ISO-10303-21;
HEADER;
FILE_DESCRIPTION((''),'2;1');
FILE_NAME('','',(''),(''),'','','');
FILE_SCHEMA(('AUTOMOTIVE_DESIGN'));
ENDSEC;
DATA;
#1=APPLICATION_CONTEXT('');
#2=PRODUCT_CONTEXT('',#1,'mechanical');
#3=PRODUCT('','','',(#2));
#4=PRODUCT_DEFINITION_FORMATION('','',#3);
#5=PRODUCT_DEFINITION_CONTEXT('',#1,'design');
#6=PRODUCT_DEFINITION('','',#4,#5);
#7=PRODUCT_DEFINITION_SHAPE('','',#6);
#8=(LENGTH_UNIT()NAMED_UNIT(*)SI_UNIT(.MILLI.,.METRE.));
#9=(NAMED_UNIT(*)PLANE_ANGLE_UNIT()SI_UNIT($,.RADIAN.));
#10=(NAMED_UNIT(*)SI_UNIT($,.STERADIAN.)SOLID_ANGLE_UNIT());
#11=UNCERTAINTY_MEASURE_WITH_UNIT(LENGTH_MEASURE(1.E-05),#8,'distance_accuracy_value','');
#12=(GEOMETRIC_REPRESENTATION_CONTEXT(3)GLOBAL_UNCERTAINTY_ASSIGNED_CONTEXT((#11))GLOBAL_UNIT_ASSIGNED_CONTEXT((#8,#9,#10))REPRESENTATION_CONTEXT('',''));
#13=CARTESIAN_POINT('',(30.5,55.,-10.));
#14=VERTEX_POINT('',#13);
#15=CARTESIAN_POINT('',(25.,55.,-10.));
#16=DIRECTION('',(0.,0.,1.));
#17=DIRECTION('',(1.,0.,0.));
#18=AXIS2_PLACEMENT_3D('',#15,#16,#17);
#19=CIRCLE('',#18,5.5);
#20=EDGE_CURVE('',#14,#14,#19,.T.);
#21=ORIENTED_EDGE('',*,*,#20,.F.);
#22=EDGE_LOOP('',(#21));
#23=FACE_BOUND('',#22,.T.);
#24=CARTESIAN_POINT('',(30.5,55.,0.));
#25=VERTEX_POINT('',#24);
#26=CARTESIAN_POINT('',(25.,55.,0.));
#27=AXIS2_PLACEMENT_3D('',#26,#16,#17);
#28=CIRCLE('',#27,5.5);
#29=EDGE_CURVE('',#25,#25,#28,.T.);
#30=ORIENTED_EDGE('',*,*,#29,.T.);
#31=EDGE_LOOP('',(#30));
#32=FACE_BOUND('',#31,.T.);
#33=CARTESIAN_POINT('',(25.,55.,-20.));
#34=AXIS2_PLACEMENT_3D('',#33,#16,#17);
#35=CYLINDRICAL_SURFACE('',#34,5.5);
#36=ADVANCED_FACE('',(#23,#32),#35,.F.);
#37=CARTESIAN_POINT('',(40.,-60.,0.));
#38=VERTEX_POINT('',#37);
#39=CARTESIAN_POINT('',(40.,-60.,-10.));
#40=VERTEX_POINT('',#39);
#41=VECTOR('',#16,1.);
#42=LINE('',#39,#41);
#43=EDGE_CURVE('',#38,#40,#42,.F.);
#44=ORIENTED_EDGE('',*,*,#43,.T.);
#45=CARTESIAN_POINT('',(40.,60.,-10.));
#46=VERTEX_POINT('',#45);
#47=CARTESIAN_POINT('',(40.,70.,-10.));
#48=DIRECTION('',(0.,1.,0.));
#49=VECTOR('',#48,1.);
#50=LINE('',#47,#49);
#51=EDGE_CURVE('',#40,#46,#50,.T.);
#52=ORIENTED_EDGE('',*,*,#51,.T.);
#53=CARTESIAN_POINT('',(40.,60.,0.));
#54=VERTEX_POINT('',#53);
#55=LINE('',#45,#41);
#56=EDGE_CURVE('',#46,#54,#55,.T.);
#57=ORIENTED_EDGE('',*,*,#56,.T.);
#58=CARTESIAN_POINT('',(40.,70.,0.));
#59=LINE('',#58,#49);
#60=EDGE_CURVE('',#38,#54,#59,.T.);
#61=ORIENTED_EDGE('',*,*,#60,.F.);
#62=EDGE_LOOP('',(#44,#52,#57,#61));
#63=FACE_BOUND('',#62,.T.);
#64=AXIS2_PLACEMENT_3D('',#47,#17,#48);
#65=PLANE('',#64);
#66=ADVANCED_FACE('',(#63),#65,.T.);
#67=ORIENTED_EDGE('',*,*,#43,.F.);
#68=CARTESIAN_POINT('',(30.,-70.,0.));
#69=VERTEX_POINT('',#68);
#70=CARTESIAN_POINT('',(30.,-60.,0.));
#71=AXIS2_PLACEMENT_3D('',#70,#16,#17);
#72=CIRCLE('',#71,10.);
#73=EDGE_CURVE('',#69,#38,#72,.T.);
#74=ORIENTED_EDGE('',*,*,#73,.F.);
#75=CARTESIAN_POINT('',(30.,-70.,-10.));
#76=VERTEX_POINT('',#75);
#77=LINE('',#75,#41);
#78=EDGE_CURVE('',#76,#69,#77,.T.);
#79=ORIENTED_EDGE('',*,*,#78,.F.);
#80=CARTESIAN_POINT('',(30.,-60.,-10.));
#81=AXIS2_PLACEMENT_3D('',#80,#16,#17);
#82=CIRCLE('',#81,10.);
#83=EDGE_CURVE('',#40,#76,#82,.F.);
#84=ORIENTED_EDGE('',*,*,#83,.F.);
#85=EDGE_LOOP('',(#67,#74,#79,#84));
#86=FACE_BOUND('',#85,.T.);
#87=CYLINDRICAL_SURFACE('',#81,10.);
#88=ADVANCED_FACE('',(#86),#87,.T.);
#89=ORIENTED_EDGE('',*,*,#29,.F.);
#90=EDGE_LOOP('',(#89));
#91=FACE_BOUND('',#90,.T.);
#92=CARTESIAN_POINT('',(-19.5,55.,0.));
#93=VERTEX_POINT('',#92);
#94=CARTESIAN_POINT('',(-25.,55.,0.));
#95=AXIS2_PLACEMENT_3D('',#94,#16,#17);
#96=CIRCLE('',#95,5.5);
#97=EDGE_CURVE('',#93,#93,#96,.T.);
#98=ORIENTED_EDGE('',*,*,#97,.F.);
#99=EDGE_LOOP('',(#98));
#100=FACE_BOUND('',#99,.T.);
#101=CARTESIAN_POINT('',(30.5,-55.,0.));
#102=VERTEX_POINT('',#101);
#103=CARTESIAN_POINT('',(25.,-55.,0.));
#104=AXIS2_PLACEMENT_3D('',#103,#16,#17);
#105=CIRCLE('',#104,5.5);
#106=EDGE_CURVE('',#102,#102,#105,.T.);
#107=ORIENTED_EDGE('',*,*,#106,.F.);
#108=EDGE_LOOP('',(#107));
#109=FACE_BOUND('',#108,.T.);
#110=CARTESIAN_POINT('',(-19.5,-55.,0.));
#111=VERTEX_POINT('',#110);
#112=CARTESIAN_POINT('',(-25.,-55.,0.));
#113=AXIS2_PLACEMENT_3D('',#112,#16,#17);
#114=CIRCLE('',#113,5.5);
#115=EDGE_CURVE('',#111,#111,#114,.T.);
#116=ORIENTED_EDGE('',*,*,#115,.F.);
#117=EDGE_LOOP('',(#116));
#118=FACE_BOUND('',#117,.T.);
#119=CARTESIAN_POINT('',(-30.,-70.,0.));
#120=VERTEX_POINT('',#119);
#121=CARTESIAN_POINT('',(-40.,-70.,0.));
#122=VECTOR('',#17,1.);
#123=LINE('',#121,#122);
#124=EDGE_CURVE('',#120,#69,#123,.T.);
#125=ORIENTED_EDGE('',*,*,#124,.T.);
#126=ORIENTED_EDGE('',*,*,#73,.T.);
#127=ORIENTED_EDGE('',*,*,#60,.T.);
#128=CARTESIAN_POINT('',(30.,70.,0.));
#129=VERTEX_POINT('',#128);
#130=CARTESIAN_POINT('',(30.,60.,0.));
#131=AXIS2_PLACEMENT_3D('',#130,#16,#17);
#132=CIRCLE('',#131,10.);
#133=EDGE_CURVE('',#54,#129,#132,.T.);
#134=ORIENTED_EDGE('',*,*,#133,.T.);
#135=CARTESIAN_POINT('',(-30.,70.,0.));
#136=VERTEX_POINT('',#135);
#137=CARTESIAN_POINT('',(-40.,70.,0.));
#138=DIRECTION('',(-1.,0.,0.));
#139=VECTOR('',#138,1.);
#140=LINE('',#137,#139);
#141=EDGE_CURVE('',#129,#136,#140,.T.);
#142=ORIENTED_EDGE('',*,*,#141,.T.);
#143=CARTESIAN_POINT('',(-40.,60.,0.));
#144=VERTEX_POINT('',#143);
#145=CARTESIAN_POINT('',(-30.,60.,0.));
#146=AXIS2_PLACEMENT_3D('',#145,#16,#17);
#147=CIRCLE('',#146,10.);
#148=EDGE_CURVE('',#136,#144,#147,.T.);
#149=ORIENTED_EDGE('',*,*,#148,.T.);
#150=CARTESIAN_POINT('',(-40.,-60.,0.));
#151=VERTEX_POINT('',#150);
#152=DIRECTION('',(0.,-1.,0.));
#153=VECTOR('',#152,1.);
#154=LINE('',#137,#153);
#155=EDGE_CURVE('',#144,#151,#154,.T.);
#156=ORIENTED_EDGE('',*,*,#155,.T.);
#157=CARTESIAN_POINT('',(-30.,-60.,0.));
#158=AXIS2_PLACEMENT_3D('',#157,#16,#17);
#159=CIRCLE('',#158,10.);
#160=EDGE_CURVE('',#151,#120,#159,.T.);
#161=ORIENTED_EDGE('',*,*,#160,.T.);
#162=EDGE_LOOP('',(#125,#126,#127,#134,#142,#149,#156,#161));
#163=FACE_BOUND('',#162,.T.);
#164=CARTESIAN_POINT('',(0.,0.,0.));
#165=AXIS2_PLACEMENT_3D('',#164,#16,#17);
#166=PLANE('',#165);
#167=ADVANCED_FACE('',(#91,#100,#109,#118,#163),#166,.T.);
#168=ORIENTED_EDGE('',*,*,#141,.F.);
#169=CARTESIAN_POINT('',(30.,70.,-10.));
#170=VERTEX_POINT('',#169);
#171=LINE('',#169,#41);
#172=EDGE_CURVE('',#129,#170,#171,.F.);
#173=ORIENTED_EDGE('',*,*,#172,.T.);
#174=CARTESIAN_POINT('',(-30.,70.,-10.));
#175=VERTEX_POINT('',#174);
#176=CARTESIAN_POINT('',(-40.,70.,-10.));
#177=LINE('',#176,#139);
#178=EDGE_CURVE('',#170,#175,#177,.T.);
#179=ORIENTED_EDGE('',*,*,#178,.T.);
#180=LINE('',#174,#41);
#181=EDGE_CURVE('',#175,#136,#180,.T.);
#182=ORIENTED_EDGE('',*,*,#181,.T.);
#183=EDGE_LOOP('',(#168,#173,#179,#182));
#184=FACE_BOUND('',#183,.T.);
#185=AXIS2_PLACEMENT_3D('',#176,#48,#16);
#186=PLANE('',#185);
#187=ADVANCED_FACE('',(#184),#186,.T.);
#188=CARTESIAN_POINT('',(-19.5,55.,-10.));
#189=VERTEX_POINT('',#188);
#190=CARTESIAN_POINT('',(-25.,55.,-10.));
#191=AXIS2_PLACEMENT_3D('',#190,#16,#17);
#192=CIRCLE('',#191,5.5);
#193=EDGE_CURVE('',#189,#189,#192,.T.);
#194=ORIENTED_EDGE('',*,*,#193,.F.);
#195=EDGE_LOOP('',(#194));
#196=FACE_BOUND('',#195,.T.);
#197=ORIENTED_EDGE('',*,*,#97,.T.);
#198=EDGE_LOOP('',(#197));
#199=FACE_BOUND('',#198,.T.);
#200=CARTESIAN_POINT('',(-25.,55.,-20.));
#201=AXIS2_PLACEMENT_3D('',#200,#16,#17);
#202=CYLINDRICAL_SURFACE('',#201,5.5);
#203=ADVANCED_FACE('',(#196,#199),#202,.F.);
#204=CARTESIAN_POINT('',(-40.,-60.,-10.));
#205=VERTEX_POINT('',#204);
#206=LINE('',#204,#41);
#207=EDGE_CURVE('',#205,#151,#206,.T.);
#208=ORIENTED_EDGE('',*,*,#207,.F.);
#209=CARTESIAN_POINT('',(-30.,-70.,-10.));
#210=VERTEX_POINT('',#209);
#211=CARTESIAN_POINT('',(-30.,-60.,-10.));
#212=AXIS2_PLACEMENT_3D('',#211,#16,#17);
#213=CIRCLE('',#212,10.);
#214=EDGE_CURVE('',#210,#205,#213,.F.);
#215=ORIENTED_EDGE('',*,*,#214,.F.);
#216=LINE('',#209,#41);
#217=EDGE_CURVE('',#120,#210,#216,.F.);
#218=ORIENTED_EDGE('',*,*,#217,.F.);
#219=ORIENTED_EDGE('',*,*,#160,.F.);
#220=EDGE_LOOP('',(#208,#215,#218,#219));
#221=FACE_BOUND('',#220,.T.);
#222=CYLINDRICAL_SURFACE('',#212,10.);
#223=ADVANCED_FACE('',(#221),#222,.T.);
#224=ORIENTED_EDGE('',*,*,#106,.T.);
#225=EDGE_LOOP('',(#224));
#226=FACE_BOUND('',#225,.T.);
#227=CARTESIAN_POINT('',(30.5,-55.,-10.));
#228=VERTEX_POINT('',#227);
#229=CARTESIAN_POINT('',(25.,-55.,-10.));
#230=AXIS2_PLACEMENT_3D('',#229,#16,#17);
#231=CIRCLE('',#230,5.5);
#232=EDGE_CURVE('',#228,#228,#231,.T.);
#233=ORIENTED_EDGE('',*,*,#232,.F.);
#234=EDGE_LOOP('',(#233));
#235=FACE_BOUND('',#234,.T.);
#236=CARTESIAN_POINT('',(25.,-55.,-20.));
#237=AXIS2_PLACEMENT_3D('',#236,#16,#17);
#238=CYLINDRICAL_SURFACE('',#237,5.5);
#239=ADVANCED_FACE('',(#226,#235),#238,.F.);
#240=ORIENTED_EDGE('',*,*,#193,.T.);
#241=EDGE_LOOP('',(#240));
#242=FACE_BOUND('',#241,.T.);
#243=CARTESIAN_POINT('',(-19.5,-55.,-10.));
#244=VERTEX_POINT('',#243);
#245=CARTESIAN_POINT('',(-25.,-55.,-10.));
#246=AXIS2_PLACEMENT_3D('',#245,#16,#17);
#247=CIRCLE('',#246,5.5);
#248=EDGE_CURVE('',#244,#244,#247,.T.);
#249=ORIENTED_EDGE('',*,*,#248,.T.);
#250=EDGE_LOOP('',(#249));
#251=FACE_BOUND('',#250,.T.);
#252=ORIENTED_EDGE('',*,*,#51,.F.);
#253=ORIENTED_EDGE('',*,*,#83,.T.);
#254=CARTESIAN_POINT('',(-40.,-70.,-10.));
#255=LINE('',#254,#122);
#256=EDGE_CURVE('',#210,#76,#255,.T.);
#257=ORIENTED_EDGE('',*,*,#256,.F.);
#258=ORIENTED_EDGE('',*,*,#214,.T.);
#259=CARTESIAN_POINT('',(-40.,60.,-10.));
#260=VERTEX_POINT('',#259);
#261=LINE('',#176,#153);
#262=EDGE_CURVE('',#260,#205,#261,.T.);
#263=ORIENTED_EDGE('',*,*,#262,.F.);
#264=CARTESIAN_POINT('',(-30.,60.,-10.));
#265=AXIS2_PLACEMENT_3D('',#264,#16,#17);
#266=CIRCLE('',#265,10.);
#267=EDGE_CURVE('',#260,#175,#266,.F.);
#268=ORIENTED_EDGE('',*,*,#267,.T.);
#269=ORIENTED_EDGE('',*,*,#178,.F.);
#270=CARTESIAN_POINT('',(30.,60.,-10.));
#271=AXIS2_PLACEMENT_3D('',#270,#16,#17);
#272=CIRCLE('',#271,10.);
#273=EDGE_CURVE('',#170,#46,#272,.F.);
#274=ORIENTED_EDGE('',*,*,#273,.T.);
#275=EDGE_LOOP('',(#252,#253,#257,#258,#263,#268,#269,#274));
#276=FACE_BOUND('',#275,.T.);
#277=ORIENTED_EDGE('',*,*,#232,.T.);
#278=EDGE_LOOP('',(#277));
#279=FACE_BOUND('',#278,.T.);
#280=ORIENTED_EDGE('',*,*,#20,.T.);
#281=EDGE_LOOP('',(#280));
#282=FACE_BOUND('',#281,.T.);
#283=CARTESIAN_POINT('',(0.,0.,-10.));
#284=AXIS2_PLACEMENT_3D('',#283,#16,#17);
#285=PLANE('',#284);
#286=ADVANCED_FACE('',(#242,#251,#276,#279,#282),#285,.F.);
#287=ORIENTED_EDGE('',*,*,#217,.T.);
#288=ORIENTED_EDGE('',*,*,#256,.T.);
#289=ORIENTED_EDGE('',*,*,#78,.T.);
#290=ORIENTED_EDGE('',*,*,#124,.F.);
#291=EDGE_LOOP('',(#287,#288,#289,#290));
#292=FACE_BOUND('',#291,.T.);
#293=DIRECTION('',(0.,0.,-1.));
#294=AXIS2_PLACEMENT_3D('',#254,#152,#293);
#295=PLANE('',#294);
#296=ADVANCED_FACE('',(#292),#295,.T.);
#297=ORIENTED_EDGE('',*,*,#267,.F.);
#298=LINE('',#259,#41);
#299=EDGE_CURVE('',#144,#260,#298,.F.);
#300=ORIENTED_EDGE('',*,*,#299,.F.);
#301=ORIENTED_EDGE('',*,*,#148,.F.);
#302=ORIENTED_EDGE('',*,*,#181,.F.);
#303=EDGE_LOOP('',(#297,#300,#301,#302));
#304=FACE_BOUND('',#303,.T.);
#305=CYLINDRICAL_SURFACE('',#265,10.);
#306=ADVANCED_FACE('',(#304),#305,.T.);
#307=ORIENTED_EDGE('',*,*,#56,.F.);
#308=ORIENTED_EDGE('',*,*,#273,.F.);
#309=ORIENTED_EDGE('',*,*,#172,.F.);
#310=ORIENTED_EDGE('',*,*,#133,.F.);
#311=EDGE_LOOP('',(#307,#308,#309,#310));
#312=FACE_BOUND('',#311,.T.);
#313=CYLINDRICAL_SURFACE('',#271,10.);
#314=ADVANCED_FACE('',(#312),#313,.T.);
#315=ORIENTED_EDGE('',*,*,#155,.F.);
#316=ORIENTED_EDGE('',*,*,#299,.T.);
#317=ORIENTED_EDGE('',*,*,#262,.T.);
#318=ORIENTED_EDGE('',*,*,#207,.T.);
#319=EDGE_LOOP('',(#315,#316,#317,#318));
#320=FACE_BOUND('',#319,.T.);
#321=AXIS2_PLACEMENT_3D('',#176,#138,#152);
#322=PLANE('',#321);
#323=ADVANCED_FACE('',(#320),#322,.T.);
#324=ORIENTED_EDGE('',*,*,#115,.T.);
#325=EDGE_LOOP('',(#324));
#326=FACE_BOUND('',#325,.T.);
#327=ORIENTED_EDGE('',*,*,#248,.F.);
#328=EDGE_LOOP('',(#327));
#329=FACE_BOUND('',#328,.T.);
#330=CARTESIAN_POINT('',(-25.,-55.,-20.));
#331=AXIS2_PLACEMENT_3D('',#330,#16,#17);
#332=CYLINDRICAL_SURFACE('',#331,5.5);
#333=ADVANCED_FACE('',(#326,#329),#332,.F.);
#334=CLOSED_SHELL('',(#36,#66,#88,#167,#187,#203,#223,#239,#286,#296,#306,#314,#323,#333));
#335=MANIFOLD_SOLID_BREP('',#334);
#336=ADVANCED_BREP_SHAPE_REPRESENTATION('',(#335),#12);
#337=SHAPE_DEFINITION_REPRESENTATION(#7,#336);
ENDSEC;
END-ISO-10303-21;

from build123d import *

# Parameters (mm, degrees)
IZIM1_W               = 80
IZIM1_H               = 140
TABAN_FLAN_1_DEPTH    = 10
RADYUS1_R             = 10
IZIM2_R               = 5.5
KES_EKSTR_ZYON1_DEPTH = 20


# Sheet-metal steps are written as plain solids
with BuildPart() as part:
    # Çizim1 → Taban-Flanş1 (new body)
    with BuildSketch(Plane.XY):
        Rectangle(IZIM1_W, IZIM1_H)
    extrude(amount=-TABAN_FLAN_1_DEPTH)

    # Radyus1
    radyus1_edges = [part.edges().sort_by_distance(p)[0] for p in [
        (40, -70, -5),
        (-40, -70, -5),
        (-40, 70, -5),
        (40, 70, -5),
    ]]
    fillet(radyus1_edges, radius=RADYUS1_R)

    # Çizim2 → Kes-Ekstrüzyon1 (cut)
    with BuildSketch(Plane.XY):
        with Locations((25, 55)):
            Circle(IZIM2_R)
        with Locations((-25, 55)):
            Circle(IZIM2_R)
        with Locations((-25, -55)):
            Circle(IZIM2_R)
        with Locations((25, -55)):
            Circle(IZIM2_R)
    extrude(amount=-KES_EKSTR_ZYON1_DEPTH, mode=Mode.SUBTRACT)


solid = part.part
